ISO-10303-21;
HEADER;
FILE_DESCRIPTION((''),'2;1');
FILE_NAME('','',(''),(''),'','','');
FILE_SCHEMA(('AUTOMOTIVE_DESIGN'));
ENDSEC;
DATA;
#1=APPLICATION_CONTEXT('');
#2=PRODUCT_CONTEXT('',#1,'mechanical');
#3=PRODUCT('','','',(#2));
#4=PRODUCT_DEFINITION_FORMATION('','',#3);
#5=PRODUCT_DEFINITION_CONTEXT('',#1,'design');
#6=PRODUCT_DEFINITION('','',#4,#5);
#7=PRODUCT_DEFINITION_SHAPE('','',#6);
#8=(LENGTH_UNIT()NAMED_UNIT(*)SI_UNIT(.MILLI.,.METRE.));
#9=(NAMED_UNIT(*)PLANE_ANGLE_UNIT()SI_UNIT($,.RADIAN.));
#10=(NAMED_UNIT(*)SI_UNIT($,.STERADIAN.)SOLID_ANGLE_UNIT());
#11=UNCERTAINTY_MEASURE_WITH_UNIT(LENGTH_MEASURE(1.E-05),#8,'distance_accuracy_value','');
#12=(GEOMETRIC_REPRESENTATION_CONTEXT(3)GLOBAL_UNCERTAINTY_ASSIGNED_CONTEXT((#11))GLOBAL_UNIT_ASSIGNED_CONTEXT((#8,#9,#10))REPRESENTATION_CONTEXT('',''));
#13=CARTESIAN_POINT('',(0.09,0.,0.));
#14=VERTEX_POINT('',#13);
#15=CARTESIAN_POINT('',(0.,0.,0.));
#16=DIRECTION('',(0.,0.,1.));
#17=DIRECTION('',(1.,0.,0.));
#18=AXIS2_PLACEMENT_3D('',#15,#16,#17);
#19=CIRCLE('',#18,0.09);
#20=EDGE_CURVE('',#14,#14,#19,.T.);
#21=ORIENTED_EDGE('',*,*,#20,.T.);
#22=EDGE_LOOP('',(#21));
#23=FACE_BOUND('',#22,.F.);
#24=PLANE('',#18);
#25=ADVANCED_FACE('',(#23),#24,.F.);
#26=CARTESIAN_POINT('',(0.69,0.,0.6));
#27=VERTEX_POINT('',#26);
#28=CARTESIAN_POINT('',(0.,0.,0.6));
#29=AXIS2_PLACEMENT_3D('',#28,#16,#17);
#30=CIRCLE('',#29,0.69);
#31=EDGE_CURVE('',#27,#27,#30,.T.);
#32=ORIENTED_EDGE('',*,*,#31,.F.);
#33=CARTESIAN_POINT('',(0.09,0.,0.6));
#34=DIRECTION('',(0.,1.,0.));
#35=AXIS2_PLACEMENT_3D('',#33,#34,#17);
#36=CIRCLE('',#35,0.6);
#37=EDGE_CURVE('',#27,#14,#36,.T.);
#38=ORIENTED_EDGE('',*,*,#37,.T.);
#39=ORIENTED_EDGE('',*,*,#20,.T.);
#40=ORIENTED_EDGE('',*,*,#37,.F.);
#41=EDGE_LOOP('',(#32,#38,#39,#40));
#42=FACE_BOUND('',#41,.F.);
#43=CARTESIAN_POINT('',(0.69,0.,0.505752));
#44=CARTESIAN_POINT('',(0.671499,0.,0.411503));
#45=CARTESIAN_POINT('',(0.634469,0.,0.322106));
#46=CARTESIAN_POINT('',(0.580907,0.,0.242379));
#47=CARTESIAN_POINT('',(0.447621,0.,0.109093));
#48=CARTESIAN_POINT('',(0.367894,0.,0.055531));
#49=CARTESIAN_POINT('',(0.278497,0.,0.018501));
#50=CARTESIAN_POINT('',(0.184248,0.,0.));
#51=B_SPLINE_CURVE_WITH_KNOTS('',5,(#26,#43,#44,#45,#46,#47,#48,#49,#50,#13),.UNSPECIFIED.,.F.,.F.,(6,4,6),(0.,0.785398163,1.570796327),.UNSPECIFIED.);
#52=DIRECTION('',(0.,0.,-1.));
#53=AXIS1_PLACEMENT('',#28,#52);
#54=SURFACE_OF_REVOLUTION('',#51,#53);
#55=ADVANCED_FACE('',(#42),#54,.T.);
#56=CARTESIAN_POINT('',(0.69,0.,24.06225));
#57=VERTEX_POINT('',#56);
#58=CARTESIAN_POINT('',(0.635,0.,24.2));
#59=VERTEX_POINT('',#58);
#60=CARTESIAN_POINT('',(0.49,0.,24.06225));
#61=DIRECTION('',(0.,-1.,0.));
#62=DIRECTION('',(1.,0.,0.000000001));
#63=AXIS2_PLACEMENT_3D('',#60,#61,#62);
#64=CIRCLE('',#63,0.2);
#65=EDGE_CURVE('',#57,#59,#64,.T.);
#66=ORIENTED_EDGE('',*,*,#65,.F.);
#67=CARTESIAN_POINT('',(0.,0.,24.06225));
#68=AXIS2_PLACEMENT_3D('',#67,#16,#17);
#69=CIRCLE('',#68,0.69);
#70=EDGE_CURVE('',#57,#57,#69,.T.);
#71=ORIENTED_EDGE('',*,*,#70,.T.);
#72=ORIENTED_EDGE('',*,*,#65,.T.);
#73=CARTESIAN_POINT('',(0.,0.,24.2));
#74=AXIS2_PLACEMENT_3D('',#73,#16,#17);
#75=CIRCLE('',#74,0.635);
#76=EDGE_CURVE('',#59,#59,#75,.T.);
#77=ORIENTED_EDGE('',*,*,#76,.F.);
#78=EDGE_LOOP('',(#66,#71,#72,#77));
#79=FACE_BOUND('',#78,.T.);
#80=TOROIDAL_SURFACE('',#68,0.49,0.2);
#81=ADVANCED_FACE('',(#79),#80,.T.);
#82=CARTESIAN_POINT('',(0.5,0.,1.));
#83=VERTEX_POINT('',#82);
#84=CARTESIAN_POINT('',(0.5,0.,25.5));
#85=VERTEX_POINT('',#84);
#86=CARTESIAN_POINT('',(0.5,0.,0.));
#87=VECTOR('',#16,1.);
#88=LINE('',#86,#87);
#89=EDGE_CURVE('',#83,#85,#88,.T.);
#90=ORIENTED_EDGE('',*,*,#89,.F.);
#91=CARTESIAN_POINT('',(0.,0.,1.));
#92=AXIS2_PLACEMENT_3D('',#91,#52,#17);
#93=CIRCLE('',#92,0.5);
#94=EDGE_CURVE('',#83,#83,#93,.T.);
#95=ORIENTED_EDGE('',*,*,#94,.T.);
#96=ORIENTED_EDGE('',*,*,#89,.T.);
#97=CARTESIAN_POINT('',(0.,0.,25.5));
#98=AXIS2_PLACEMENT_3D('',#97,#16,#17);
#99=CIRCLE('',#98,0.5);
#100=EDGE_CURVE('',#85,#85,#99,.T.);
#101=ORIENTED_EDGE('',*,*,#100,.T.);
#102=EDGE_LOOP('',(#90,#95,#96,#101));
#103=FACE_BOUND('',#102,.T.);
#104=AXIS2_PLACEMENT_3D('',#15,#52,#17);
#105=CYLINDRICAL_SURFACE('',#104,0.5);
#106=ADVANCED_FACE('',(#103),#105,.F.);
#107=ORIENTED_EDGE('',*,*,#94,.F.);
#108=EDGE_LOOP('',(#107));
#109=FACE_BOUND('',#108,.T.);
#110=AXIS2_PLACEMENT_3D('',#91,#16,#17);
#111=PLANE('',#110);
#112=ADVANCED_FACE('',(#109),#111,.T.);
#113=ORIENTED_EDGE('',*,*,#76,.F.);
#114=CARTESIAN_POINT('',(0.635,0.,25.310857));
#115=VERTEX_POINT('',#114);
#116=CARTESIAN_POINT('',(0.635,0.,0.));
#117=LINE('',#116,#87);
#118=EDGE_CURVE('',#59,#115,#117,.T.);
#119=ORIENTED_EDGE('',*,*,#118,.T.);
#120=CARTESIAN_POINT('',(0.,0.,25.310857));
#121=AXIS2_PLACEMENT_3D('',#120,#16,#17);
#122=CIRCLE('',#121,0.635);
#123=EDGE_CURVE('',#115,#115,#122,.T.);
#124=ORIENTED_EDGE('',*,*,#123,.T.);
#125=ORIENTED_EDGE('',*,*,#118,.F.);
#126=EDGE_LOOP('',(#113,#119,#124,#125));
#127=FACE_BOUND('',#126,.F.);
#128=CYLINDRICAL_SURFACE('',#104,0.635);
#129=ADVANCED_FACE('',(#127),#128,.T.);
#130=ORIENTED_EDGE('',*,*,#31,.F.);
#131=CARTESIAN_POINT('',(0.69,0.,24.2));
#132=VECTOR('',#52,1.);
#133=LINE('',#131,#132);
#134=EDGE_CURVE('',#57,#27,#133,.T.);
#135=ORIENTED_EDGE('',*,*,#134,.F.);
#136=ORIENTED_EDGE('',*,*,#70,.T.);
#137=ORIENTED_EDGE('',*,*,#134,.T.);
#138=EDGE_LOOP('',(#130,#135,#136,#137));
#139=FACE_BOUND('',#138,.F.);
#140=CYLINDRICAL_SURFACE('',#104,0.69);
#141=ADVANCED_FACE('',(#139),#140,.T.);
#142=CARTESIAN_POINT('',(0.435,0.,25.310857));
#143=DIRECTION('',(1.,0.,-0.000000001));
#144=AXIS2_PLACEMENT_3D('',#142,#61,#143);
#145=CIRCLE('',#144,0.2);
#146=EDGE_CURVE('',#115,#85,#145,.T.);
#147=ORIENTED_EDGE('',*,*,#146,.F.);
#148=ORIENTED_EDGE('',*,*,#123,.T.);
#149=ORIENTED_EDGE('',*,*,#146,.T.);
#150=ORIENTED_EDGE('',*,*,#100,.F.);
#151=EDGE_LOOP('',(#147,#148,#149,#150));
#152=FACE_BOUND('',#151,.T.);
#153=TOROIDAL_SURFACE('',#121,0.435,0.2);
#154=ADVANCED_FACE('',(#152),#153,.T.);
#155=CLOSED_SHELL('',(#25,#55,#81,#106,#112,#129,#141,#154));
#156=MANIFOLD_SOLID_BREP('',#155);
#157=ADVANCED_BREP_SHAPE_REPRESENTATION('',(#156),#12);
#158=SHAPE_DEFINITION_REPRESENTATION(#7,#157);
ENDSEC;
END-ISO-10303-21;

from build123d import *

# Parameters (mm, degrees)
F0_R     = 0.69
F0_R_2   = 0.635
F1_DEPTH = 24.2
F0_R_3   = 0.5
F2_DEPTH = 25.5
F3_DEPTH = 1
F4_R     = 0.6


# Not quite as in the source:
# - a fillet or chamfer that OpenCascade refuses, or shapes differently, is made with other operations: its cross-section is extruded or revolved along the edge and cut away or added


with BuildPart() as f1:
    # F0 (on Top) → F1 (new body)
    with BuildSketch(Plane.XY):
        Circle(F0_R)
        Circle(F0_R_2, mode=Mode.SUBTRACT)
    extrude(amount=F1_DEPTH)

    # F0 (on Top) → F2 (join)
    with BuildSketch(Plane.XY):
        Circle(F0_R_2)
        Circle(F0_R_3, mode=Mode.SUBTRACT)
    extrude(amount=F2_DEPTH)

    # F0 (on Top) → F3 (join)
    with BuildSketch(Plane.XY):
        Circle(F0_R)
        Circle(F0_R_2, mode=Mode.SUBTRACT)
        Circle(F0_R_2)
        Circle(F0_R_3, mode=Mode.SUBTRACT)
        Circle(F0_R_3)
    extrude(amount=F3_DEPTH)

    # F4
    f4_edges = [f1.edges().sort_by_distance(p)[0] for p in [
        (-0.69, 0, 0),
    ]]
    fillet(f4_edges, radius=F4_R)

    # F5: fillet of radius 0.2 on 2 edges, made by hand

    # F5_s1 → F5_t2 (revolve, cut)
    with BuildSketch(Plane.XZ):
        with BuildLine():
            ThreePointArc((0.69, 24.0622502269), (0.6757417562, 24.1364122117), (0.635, 24.2))
            Line((0.635, 24.2), (0.69, 24.2))
            Line((0.69, 24.2), (0.69, 24.0622502269))
        make_face()
    revolve(axis=Axis((0, 0, 24.2), (0, 0, 1)), mode=Mode.SUBTRACT)

    # F5_s3 → F5_t4 (revolve, cut)
    with BuildSketch(Plane.XZ):
        with BuildLine():
            ThreePointArc((0.635, 25.3108571968), (0.597788206, 25.4270466972), (0.5, 25.5))
            Line((0.5, 25.5), (0.635, 25.5))
            Line((0.635, 25.5), (0.635, 25.3108571968))
        make_face()
    revolve(axis=Axis((0, 0, 25.5), (0, 0, 1)), mode=Mode.SUBTRACT)


solid = f1.part
